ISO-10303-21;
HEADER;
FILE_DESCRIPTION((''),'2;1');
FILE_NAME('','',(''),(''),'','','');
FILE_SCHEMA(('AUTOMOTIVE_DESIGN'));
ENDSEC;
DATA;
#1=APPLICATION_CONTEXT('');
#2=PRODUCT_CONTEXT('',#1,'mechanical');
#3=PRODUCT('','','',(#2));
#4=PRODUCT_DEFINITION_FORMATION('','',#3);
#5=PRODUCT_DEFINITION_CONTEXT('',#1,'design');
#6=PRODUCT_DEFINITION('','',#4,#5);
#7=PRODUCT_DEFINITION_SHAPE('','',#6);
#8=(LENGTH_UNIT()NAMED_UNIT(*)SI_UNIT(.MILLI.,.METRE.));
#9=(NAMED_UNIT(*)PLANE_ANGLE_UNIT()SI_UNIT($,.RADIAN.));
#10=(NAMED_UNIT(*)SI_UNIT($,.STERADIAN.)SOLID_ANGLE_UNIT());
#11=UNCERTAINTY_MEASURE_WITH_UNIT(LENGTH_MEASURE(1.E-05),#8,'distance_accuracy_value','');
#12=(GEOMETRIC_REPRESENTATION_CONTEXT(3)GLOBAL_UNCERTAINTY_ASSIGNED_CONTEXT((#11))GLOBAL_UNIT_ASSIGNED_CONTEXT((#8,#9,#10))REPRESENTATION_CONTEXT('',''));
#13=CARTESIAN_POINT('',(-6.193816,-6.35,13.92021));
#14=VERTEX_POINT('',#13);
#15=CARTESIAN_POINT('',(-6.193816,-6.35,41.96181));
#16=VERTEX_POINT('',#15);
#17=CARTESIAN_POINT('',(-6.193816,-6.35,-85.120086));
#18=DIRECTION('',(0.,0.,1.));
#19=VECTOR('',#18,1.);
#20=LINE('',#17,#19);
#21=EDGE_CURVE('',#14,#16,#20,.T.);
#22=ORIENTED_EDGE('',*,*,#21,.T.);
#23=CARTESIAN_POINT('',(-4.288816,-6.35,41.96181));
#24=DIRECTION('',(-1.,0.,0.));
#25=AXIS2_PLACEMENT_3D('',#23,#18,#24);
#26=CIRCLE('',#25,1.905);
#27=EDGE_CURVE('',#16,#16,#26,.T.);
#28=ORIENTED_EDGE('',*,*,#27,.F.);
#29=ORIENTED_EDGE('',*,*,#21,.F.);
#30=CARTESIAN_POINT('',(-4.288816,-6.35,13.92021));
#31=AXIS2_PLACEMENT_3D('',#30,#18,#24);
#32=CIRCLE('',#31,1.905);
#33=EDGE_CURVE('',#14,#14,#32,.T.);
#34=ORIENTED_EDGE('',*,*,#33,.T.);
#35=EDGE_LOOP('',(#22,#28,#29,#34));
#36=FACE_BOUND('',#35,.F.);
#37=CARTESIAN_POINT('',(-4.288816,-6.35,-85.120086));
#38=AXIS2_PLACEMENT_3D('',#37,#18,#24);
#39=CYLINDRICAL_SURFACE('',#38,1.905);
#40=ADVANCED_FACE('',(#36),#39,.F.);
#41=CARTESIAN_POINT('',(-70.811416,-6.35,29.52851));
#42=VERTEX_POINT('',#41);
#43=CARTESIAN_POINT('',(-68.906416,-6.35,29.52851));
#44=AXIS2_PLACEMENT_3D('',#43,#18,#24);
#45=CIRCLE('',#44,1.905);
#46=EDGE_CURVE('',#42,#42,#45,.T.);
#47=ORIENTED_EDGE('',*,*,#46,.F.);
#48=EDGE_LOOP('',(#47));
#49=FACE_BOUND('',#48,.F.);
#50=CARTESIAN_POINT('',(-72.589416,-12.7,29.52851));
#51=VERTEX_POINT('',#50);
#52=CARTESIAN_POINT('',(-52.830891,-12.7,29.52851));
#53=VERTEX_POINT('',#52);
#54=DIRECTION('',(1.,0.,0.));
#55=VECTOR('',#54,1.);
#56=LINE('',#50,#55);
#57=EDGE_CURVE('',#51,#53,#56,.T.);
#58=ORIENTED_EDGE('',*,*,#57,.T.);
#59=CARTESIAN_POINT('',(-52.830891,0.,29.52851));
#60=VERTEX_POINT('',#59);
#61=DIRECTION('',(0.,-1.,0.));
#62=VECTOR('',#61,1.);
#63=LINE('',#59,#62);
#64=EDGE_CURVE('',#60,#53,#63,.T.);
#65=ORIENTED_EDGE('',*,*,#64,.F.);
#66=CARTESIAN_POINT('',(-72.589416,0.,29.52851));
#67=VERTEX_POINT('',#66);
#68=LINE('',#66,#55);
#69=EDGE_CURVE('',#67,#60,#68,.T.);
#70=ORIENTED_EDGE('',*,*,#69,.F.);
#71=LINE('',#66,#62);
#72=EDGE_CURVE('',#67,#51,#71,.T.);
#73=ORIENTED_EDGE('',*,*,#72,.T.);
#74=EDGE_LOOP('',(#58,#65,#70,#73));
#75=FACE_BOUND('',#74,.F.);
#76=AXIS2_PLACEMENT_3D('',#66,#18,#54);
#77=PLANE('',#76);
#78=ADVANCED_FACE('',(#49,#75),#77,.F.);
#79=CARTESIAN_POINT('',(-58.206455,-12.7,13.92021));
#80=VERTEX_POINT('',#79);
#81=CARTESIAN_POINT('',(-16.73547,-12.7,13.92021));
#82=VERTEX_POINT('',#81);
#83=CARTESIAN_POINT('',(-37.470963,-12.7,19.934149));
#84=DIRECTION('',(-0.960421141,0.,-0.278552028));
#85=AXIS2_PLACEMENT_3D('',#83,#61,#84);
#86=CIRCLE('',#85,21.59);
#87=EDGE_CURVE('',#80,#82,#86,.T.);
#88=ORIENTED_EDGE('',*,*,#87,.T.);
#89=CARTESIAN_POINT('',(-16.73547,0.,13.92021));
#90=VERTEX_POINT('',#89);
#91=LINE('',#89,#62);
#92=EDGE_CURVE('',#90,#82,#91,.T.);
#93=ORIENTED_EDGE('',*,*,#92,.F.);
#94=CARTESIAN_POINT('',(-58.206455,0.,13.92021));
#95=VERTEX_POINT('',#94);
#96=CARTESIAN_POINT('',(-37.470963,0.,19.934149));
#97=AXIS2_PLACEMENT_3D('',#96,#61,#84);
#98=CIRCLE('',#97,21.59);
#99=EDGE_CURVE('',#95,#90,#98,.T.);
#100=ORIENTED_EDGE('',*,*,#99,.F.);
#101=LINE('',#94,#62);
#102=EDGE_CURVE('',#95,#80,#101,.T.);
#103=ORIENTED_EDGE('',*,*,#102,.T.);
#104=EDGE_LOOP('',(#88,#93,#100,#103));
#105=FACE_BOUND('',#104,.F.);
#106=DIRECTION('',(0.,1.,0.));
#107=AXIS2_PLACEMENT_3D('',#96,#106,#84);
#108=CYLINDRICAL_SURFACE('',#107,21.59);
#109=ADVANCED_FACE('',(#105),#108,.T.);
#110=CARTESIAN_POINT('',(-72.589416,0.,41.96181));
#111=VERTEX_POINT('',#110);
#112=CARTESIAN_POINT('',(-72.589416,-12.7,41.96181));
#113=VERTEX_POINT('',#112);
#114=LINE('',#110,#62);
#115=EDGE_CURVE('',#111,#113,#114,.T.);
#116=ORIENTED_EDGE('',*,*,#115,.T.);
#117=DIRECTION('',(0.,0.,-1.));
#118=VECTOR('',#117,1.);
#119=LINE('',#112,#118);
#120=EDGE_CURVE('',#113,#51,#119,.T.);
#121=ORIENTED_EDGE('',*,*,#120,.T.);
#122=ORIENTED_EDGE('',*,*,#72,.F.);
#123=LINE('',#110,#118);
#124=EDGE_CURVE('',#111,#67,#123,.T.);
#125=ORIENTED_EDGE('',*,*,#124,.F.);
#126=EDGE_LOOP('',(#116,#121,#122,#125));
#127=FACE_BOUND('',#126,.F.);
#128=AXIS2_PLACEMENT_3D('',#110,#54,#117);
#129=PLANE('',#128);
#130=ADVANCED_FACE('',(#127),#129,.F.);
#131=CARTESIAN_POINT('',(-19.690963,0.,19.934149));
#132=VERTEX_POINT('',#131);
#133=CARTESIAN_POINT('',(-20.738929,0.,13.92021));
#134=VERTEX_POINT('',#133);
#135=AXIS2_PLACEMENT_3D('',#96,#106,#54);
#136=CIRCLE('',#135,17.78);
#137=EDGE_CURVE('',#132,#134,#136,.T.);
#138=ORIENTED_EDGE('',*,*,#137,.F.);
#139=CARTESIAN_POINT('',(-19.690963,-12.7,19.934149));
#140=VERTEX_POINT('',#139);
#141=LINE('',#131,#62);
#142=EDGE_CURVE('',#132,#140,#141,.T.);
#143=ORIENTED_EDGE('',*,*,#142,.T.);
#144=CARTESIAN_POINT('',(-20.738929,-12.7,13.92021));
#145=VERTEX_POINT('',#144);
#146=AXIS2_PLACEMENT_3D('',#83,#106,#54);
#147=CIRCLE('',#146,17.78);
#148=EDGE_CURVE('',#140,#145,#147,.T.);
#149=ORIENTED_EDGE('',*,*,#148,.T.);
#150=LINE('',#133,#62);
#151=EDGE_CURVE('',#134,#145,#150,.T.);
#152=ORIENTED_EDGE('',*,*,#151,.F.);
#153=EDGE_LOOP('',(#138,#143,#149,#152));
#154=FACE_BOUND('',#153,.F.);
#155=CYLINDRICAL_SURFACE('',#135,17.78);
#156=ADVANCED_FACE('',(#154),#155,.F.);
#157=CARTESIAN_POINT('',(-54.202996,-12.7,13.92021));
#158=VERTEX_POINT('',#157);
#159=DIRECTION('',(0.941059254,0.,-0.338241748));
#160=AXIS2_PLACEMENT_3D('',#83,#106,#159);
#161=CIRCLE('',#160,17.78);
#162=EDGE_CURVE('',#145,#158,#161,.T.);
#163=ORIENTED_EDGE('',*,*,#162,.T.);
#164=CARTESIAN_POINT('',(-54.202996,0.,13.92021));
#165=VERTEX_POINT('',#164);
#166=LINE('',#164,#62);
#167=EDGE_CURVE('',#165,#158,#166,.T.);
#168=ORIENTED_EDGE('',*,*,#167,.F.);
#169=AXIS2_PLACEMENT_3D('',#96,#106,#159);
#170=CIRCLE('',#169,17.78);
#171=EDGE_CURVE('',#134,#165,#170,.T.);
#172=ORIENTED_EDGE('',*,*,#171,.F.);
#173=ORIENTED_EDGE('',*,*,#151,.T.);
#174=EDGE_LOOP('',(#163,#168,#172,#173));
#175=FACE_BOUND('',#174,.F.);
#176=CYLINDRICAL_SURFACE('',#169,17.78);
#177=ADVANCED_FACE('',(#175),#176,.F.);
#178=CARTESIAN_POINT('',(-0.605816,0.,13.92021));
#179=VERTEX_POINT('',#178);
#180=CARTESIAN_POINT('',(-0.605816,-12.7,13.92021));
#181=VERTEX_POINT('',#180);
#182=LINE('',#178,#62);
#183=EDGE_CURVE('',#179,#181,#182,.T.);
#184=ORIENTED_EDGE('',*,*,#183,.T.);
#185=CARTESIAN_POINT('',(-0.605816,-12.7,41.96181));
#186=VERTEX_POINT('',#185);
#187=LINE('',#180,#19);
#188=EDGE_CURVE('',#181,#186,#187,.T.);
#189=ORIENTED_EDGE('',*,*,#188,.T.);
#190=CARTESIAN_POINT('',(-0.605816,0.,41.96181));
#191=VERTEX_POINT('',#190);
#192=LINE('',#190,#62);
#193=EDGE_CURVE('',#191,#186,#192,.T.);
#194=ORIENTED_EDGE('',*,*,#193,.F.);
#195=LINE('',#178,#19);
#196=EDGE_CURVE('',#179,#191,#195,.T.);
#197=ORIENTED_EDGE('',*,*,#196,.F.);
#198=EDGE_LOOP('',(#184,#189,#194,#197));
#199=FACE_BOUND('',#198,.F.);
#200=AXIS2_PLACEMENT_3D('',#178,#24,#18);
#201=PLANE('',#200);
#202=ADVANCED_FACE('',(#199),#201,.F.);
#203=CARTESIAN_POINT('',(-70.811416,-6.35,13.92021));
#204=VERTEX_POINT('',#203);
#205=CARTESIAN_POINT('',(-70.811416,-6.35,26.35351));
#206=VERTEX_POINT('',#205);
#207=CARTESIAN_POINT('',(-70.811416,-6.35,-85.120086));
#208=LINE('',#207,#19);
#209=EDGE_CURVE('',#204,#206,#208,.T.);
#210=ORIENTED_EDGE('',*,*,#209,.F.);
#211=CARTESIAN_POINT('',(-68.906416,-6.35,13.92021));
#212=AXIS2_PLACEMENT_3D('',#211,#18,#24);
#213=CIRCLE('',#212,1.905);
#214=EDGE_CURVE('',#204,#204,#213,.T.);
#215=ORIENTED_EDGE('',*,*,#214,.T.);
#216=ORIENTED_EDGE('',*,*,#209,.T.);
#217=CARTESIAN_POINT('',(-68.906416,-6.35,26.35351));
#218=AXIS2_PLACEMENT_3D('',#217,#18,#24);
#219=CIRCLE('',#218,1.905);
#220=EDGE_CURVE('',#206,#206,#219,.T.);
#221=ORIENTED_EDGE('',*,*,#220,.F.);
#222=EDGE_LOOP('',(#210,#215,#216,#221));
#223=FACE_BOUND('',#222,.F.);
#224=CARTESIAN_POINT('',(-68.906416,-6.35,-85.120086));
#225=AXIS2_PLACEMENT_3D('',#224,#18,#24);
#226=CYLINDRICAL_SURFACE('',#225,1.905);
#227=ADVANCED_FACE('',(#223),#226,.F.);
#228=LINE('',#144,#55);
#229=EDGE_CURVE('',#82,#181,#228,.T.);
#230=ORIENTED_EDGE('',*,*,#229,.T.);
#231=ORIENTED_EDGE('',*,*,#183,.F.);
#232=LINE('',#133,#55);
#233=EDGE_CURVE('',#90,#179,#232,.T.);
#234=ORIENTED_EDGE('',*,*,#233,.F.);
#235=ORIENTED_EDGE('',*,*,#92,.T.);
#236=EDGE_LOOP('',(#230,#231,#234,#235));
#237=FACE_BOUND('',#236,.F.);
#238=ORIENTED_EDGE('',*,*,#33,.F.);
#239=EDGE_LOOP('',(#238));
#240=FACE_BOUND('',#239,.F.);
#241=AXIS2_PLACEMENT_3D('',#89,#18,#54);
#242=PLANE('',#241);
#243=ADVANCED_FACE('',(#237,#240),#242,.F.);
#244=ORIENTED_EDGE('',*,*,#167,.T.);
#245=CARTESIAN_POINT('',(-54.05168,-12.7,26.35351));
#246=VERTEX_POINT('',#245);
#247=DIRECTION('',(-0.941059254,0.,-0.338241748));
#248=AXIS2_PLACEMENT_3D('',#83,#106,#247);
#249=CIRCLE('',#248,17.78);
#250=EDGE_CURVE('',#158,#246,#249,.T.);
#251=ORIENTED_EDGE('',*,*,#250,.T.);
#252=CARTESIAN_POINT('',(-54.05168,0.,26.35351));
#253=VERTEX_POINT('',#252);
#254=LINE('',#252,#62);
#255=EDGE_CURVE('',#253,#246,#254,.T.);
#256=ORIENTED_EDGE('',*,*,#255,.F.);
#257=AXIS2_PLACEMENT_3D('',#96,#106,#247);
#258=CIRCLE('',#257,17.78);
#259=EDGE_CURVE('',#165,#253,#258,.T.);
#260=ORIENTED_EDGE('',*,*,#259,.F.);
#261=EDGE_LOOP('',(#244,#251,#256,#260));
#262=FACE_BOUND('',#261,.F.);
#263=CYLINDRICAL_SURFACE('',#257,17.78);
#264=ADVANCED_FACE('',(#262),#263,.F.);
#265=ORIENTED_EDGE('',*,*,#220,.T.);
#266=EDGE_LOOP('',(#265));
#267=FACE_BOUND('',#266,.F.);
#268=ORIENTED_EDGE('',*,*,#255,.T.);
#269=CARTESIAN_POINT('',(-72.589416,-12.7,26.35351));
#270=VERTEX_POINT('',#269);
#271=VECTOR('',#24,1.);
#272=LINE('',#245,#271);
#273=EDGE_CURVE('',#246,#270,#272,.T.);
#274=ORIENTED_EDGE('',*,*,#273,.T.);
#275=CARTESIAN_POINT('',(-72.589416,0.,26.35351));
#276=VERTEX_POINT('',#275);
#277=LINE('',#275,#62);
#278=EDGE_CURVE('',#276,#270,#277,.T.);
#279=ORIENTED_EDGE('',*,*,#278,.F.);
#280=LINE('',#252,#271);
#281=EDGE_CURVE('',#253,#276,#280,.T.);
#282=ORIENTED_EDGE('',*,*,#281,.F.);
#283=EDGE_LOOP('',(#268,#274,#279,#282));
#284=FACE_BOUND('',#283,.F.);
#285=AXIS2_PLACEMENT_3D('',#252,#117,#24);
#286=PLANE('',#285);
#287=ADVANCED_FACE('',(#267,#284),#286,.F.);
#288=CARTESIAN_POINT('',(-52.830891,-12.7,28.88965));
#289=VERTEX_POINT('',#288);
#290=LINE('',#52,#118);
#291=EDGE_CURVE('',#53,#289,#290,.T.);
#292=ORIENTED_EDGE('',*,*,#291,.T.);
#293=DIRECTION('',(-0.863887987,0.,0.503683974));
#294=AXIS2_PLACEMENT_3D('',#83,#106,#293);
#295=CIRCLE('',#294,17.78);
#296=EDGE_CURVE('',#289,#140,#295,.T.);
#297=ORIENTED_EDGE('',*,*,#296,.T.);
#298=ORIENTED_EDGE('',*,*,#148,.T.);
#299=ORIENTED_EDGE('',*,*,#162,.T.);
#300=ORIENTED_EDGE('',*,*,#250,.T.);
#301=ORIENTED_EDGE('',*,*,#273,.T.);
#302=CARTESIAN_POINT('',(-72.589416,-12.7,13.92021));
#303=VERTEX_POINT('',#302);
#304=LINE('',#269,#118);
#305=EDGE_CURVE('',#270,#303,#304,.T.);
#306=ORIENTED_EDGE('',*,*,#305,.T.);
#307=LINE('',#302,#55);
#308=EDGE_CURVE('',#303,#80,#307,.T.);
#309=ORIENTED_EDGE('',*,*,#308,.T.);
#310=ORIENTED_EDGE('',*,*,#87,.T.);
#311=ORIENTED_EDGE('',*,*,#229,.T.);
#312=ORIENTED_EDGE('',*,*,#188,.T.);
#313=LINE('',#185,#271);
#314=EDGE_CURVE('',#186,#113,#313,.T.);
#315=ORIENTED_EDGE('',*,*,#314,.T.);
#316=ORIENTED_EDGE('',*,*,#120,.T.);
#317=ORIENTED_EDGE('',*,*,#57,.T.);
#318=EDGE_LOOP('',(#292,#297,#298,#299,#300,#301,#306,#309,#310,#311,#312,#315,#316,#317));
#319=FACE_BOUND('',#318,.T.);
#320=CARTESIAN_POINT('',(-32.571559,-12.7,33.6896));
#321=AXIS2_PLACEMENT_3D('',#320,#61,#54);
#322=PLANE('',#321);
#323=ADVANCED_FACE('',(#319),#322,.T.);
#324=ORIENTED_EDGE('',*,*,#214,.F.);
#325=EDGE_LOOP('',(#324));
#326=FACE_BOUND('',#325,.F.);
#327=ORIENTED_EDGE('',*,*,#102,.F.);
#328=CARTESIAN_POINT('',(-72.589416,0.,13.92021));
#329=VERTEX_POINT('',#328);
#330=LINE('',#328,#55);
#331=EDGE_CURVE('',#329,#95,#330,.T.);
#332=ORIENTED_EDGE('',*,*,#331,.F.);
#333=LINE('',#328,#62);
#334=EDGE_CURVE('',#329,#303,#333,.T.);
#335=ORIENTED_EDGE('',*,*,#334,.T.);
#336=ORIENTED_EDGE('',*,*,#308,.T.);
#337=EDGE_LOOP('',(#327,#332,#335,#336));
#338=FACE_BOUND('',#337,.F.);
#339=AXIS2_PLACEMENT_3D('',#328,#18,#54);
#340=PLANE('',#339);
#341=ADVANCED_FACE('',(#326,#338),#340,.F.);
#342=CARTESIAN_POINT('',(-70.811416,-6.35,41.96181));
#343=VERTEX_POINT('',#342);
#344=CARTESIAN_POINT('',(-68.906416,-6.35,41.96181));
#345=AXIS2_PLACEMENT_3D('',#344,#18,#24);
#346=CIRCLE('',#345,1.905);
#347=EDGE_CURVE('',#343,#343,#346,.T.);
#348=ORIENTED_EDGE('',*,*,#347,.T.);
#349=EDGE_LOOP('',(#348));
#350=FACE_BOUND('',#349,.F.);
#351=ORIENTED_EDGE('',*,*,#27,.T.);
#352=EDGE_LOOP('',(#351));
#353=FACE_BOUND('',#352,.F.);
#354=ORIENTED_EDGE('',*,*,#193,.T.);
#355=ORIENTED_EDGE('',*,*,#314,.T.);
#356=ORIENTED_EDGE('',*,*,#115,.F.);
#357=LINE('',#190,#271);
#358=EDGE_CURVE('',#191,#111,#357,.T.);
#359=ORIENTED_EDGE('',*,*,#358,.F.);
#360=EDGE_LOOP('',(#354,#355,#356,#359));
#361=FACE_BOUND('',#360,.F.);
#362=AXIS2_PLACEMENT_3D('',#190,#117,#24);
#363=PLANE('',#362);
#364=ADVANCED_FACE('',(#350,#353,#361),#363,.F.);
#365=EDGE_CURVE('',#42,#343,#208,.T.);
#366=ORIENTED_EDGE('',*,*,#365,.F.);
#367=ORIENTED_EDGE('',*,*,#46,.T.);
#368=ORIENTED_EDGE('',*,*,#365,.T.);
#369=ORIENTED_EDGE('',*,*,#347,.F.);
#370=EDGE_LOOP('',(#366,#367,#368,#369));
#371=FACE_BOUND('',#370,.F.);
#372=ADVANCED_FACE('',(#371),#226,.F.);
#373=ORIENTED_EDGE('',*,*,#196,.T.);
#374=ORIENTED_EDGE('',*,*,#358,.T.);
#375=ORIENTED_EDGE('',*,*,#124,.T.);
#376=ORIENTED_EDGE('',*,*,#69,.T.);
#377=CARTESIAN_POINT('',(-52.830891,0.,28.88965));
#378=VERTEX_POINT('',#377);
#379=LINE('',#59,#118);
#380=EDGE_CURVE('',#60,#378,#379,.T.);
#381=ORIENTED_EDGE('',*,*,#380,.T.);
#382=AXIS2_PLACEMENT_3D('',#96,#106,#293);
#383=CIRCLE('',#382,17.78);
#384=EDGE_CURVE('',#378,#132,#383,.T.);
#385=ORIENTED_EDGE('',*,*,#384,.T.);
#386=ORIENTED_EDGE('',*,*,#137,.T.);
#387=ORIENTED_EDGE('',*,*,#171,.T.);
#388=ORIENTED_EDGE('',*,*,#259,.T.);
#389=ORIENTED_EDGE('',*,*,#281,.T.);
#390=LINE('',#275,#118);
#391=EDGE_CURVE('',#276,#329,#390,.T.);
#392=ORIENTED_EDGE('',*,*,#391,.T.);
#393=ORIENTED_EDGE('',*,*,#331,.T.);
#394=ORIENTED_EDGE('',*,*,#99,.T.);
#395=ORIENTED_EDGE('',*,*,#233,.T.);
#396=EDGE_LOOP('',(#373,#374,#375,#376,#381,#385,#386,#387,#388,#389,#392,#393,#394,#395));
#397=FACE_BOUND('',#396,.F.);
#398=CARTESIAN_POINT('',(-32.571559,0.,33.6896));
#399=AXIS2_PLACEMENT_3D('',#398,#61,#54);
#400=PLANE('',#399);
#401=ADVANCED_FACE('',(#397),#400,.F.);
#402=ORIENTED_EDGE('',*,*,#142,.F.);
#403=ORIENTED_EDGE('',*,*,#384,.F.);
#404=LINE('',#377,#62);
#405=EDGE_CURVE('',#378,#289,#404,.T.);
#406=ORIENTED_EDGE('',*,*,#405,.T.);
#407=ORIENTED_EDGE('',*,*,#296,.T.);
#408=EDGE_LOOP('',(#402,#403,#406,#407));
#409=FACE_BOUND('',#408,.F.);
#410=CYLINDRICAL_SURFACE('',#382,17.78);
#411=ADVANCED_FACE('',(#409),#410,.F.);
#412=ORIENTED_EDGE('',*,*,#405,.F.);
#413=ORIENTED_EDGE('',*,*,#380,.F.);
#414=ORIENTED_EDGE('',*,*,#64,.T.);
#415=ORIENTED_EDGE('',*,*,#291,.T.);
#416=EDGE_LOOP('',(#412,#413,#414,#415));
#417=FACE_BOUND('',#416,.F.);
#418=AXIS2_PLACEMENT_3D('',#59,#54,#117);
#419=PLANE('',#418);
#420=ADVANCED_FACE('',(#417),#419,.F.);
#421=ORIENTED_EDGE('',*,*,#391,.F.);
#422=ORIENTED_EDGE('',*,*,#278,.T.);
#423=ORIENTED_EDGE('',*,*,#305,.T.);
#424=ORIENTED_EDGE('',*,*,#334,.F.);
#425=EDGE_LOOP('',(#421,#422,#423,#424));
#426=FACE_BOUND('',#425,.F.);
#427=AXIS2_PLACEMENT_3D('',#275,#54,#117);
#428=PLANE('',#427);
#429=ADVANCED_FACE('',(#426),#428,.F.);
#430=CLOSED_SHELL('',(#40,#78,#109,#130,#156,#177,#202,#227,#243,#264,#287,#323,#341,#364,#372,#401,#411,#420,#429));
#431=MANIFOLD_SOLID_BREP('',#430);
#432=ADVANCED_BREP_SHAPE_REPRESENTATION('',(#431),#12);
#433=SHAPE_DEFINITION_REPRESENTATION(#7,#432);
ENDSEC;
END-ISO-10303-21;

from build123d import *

# Parameters (mm, degrees)
F1_DEPTH = 12.7
F3_D     = 3.81


# Not quite as in the source:
# - a feature names something its author has since deleted; it is built from what else it names


with BuildPart() as f1:
    # F0 (on Front) → F1 (new body)
    with BuildSketch(Plane.XZ):
        with BuildLine():
            Line((-0.6058157035, 13.9202102855), (-0.6058157035, 41.9618102855))
            Line((-0.6058157035, 41.9618102855), (-2.6976561639, 41.9618102855))
            Line((-2.6976561639, 41.9618102855), (-72.5894157035, 41.9618102855))
            Line((-72.5894157035, 41.9618102855), (-72.5894157035, 29.5285102855))
            Line((-72.5894157035, 29.5285102855), (-59.4971985196, 29.5285102855))
            Line((-59.4971985196, 29.5285102855), (-56.8120155754, 29.5285102855))
            ThreePointArc((-56.8120155754, 29.5285102855), (-32.5437541307, 40.9543939264), (-15.88096278, 19.934148568))
            ThreePointArc((-15.88096278, 19.934148568), (-16.0956571498, 16.8969773161), (-16.7354703496, 13.9202102855))
            Line((-16.7354703496, 13.9202102855), (-0.6058157035, 13.9202102855))
        make_face()
        with BuildLine():
            Line((-72.5894157035, 13.9202102855), (-58.2064552105, 13.9202102855))
            ThreePointArc((-58.2064552105, 13.9202102855), (-59.0599250667, 20.1458261131), (-58.0845479883, 26.3535102855))
            Line((-58.0845479883, 26.3535102855), (-59.4971985196, 26.3535102855))
            Line((-59.4971985196, 26.3535102855), (-72.5894157035, 26.3535102855))
            Line((-72.5894157035, 26.3535102855), (-72.5894157035, 13.9202102855))
        make_face()
        with BuildLine():
            Line((-20.7389292415, 13.9202102855), (-16.7354703496, 13.9202102855))
            ThreePointArc((-16.7354703496, 13.9202102855), (-16.0956571498, 16.8969773161), (-15.88096278, 19.934148568))
            ThreePointArc((-15.88096278, 19.934148568), (-32.5437541307, 40.9543939264), (-56.8120155754, 29.5285102855))
            Line((-56.8120155754, 29.5285102855), (-52.8308911926, 29.5285102855))
            Line((-52.8308911926, 29.5285102855), (-52.8308911926, 28.8896496238))
            ThreePointArc((-52.8308911926, 28.8896496238), (-32.8325970751, 37.098470972), (-19.69096278, 19.934148568))
            ThreePointArc((-19.69096278, 19.934148568), (-19.9549136205, 16.881867152), (-20.7389292415, 13.9202102855))
        make_face()
        with BuildLine():
            ThreePointArc((-58.2064552105, 13.9202102855), (-37.47096278, -1.655851432), (-16.7354703496, 13.9202102855))
            Line((-16.7354703496, 13.9202102855), (-20.7389292415, 13.9202102855))
            ThreePointArc((-20.7389292415, 13.9202102855), (-37.47096278, 2.154148568), (-54.2029963185, 13.9202102855))
            Line((-54.2029963185, 13.9202102855), (-58.2064552105, 13.9202102855))
        make_face()
        with BuildLine():
            ThreePointArc((-58.0845479883, 26.3535102855), (-59.0599250667, 20.1458261131), (-58.2064552105, 13.9202102855))
            Line((-58.2064552105, 13.9202102855), (-54.2029963185, 13.9202102855))
            ThreePointArc((-54.2029963185, 13.9202102855), (-55.249646191, 20.1505190165), (-54.0516803501, 26.3535102855))
            Line((-54.0516803501, 26.3535102855), (-58.0845479883, 26.3535102855))
        make_face()
    extrude(amount=F1_DEPTH)

    # F3 (through all)
    with Locations(Plane(origin=(0, 0, 0), x_dir=(1, 0, 0), z_dir=(0, 0, -1))):
        with Locations((-68.9064157035, 6.35), (-4.2888157035, 6.35)):
            Hole(F3_D / 2)


solid = f1.part
